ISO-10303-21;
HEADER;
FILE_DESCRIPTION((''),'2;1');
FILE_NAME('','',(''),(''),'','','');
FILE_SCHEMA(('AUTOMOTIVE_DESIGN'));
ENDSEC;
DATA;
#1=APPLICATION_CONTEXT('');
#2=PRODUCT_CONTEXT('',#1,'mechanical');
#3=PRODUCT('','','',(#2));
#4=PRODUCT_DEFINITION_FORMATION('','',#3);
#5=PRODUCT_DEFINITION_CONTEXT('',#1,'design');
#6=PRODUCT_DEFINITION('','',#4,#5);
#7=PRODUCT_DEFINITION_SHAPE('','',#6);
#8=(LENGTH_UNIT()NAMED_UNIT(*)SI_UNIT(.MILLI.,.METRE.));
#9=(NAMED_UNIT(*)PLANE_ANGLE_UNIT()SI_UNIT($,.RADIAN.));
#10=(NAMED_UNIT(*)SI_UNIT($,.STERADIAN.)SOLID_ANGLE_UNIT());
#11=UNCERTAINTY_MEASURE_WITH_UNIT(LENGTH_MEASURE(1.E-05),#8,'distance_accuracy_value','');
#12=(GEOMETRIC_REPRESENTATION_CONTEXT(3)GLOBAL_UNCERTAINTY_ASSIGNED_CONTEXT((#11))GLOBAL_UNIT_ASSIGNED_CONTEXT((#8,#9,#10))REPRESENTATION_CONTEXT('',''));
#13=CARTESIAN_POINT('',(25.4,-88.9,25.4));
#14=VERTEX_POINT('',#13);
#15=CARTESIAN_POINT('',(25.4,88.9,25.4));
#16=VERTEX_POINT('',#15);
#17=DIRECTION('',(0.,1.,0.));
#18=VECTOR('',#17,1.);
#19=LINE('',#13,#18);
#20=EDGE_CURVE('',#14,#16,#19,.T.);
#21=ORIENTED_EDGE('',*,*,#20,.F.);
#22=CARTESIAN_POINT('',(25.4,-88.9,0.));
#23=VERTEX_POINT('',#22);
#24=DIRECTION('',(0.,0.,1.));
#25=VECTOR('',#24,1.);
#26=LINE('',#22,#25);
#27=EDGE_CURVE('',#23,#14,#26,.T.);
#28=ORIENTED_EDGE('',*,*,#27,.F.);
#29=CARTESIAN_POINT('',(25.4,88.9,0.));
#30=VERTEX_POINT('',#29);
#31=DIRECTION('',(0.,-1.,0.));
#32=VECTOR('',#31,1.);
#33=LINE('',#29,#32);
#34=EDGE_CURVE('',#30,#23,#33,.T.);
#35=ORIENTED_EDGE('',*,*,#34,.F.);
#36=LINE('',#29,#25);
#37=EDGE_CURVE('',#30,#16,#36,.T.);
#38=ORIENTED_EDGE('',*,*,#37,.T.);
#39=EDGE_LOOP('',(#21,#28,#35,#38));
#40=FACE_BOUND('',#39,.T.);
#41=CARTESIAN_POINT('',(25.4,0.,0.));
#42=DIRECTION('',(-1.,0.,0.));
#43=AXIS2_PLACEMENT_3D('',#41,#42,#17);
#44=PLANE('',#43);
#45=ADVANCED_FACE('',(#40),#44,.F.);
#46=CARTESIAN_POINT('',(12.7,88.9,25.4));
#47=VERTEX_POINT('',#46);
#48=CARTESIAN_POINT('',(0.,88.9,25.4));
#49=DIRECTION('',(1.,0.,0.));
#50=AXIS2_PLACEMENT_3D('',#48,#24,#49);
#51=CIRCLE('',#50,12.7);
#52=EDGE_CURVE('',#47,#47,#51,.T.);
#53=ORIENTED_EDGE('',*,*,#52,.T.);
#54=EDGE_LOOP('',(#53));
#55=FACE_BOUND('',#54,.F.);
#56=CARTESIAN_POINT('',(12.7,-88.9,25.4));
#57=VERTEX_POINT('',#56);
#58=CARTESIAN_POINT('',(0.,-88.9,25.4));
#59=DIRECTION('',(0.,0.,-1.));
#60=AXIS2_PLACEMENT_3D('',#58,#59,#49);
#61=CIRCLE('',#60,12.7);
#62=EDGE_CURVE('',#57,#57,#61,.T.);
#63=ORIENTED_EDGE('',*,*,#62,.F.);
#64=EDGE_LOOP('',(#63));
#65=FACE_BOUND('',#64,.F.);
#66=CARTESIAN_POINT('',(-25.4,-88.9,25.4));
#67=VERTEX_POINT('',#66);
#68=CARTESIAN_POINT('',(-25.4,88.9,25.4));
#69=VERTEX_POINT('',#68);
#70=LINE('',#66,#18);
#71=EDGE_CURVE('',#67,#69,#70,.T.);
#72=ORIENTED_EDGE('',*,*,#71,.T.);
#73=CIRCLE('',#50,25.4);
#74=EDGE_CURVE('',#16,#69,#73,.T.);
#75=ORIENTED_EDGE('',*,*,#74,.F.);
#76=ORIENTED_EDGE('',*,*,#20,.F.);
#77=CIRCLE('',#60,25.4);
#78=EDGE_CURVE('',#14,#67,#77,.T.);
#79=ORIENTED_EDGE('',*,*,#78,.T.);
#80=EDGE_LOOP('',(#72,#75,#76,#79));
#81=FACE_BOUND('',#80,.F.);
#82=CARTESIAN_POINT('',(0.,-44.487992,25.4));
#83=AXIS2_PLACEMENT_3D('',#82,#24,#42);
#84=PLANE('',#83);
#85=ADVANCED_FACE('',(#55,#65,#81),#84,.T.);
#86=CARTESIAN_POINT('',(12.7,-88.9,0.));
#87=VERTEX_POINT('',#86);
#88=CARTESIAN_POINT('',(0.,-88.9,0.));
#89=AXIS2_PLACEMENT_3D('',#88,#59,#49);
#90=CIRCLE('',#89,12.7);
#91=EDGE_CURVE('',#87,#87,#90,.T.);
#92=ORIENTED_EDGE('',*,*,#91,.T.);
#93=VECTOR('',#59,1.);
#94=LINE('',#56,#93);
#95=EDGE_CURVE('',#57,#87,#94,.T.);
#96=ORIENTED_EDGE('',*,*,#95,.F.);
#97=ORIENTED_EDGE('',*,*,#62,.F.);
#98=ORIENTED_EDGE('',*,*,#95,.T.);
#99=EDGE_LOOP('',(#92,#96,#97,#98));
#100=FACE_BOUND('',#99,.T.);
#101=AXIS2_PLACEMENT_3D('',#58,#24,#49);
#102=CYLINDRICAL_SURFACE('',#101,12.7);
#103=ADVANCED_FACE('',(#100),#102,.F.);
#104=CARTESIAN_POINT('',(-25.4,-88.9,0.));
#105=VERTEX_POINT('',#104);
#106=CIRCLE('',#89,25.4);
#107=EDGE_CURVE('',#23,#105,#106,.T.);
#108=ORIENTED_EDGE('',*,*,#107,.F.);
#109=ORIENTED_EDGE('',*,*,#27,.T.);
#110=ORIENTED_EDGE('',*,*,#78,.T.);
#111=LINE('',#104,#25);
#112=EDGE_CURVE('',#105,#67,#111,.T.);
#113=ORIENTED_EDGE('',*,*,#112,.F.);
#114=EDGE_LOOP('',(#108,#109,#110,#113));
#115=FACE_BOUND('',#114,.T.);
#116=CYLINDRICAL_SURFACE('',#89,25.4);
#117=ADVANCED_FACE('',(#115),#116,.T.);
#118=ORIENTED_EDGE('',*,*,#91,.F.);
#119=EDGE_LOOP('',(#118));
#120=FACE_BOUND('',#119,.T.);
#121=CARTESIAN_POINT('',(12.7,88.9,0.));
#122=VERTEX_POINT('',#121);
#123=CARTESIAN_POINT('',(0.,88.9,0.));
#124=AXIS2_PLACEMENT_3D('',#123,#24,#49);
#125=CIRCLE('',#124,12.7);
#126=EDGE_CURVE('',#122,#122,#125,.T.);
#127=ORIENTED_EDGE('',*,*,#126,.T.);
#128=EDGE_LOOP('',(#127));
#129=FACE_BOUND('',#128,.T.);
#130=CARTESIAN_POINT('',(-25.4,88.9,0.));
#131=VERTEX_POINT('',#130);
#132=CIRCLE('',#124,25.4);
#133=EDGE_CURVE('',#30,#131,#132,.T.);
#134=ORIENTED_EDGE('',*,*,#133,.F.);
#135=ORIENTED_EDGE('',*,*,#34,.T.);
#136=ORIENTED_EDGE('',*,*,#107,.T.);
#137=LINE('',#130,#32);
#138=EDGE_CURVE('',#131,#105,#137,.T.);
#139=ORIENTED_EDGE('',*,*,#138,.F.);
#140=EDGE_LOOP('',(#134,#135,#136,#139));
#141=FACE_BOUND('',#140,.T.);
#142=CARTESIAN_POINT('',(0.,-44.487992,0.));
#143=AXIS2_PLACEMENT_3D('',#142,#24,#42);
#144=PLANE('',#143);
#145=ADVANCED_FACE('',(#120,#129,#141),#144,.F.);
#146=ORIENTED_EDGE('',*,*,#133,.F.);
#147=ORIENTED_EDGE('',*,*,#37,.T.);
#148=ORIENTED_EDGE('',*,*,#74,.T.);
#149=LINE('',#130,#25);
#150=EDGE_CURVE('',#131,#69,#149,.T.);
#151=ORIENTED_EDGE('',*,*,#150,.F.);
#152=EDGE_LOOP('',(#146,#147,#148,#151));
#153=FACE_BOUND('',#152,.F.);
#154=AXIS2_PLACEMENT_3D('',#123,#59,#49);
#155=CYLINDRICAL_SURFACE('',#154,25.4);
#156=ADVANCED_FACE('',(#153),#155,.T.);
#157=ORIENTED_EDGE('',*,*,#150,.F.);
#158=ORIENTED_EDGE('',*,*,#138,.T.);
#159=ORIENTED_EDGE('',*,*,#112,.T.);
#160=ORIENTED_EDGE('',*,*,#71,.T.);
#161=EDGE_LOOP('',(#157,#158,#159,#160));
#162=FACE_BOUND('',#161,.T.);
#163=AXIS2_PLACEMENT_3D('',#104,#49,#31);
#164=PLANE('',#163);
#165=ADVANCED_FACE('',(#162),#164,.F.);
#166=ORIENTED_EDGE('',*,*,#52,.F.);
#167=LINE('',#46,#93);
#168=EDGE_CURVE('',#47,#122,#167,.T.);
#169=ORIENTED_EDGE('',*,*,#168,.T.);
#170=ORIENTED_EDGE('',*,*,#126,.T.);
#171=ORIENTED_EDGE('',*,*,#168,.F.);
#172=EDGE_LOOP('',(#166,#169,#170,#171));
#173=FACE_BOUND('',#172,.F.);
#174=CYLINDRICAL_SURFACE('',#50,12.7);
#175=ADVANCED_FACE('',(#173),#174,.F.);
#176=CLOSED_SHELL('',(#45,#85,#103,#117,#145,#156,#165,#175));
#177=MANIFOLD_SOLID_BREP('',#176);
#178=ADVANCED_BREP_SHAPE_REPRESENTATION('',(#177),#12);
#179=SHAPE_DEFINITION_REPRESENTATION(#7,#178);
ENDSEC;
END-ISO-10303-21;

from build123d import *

# Parameters (mm, degrees)
F1_DEPTH = 25.4
F2_R     = 12.7
F3_DEPTH = 25.4


with BuildPart() as f1:
    # F0 (on Top) → F1 (new body)
    with BuildSketch(Plane.XY):
        with BuildLine():
            Line((-25.4, 88.9), (-25.4, 0))
            Line((-25.4, 0), (25.4, 0))
            Line((25.4, 0), (25.4, 88.9))
            ThreePointArc((25.4, 88.9), (0, 63.5), (-25.4, 88.9))
        make_face()
        with BuildLine():
            ThreePointArc((25.4, 88.9), (0, 114.3), (-25.4, 88.9))
            Line((-25.4, 88.9), (25.4, 88.9))
        make_face()
        with BuildLine():
            Line((25.4, 88.9), (-25.4, 88.9))
            ThreePointArc((-25.4, 88.9), (0, 63.5), (25.4, 88.9))
        make_face()
    extrude(amount=F1_DEPTH)

    # F2 (on face) → F3 (cut)
    with BuildSketch(Plane.XY.offset(25.4)):
        with Locations((0, 88.9)):
            Circle(F2_R)
    extrude(amount=-F3_DEPTH, mode=Mode.SUBTRACT)

    # F4: F1 across face


with BuildPart() as f1_1:
    add(f1.part)
    add(f1.part.mirror(Plane(origin=(0, 0, 12.7), x_dir=(1, 0, 0), z_dir=(0, -1, 0))))


solid = f1_1.part
